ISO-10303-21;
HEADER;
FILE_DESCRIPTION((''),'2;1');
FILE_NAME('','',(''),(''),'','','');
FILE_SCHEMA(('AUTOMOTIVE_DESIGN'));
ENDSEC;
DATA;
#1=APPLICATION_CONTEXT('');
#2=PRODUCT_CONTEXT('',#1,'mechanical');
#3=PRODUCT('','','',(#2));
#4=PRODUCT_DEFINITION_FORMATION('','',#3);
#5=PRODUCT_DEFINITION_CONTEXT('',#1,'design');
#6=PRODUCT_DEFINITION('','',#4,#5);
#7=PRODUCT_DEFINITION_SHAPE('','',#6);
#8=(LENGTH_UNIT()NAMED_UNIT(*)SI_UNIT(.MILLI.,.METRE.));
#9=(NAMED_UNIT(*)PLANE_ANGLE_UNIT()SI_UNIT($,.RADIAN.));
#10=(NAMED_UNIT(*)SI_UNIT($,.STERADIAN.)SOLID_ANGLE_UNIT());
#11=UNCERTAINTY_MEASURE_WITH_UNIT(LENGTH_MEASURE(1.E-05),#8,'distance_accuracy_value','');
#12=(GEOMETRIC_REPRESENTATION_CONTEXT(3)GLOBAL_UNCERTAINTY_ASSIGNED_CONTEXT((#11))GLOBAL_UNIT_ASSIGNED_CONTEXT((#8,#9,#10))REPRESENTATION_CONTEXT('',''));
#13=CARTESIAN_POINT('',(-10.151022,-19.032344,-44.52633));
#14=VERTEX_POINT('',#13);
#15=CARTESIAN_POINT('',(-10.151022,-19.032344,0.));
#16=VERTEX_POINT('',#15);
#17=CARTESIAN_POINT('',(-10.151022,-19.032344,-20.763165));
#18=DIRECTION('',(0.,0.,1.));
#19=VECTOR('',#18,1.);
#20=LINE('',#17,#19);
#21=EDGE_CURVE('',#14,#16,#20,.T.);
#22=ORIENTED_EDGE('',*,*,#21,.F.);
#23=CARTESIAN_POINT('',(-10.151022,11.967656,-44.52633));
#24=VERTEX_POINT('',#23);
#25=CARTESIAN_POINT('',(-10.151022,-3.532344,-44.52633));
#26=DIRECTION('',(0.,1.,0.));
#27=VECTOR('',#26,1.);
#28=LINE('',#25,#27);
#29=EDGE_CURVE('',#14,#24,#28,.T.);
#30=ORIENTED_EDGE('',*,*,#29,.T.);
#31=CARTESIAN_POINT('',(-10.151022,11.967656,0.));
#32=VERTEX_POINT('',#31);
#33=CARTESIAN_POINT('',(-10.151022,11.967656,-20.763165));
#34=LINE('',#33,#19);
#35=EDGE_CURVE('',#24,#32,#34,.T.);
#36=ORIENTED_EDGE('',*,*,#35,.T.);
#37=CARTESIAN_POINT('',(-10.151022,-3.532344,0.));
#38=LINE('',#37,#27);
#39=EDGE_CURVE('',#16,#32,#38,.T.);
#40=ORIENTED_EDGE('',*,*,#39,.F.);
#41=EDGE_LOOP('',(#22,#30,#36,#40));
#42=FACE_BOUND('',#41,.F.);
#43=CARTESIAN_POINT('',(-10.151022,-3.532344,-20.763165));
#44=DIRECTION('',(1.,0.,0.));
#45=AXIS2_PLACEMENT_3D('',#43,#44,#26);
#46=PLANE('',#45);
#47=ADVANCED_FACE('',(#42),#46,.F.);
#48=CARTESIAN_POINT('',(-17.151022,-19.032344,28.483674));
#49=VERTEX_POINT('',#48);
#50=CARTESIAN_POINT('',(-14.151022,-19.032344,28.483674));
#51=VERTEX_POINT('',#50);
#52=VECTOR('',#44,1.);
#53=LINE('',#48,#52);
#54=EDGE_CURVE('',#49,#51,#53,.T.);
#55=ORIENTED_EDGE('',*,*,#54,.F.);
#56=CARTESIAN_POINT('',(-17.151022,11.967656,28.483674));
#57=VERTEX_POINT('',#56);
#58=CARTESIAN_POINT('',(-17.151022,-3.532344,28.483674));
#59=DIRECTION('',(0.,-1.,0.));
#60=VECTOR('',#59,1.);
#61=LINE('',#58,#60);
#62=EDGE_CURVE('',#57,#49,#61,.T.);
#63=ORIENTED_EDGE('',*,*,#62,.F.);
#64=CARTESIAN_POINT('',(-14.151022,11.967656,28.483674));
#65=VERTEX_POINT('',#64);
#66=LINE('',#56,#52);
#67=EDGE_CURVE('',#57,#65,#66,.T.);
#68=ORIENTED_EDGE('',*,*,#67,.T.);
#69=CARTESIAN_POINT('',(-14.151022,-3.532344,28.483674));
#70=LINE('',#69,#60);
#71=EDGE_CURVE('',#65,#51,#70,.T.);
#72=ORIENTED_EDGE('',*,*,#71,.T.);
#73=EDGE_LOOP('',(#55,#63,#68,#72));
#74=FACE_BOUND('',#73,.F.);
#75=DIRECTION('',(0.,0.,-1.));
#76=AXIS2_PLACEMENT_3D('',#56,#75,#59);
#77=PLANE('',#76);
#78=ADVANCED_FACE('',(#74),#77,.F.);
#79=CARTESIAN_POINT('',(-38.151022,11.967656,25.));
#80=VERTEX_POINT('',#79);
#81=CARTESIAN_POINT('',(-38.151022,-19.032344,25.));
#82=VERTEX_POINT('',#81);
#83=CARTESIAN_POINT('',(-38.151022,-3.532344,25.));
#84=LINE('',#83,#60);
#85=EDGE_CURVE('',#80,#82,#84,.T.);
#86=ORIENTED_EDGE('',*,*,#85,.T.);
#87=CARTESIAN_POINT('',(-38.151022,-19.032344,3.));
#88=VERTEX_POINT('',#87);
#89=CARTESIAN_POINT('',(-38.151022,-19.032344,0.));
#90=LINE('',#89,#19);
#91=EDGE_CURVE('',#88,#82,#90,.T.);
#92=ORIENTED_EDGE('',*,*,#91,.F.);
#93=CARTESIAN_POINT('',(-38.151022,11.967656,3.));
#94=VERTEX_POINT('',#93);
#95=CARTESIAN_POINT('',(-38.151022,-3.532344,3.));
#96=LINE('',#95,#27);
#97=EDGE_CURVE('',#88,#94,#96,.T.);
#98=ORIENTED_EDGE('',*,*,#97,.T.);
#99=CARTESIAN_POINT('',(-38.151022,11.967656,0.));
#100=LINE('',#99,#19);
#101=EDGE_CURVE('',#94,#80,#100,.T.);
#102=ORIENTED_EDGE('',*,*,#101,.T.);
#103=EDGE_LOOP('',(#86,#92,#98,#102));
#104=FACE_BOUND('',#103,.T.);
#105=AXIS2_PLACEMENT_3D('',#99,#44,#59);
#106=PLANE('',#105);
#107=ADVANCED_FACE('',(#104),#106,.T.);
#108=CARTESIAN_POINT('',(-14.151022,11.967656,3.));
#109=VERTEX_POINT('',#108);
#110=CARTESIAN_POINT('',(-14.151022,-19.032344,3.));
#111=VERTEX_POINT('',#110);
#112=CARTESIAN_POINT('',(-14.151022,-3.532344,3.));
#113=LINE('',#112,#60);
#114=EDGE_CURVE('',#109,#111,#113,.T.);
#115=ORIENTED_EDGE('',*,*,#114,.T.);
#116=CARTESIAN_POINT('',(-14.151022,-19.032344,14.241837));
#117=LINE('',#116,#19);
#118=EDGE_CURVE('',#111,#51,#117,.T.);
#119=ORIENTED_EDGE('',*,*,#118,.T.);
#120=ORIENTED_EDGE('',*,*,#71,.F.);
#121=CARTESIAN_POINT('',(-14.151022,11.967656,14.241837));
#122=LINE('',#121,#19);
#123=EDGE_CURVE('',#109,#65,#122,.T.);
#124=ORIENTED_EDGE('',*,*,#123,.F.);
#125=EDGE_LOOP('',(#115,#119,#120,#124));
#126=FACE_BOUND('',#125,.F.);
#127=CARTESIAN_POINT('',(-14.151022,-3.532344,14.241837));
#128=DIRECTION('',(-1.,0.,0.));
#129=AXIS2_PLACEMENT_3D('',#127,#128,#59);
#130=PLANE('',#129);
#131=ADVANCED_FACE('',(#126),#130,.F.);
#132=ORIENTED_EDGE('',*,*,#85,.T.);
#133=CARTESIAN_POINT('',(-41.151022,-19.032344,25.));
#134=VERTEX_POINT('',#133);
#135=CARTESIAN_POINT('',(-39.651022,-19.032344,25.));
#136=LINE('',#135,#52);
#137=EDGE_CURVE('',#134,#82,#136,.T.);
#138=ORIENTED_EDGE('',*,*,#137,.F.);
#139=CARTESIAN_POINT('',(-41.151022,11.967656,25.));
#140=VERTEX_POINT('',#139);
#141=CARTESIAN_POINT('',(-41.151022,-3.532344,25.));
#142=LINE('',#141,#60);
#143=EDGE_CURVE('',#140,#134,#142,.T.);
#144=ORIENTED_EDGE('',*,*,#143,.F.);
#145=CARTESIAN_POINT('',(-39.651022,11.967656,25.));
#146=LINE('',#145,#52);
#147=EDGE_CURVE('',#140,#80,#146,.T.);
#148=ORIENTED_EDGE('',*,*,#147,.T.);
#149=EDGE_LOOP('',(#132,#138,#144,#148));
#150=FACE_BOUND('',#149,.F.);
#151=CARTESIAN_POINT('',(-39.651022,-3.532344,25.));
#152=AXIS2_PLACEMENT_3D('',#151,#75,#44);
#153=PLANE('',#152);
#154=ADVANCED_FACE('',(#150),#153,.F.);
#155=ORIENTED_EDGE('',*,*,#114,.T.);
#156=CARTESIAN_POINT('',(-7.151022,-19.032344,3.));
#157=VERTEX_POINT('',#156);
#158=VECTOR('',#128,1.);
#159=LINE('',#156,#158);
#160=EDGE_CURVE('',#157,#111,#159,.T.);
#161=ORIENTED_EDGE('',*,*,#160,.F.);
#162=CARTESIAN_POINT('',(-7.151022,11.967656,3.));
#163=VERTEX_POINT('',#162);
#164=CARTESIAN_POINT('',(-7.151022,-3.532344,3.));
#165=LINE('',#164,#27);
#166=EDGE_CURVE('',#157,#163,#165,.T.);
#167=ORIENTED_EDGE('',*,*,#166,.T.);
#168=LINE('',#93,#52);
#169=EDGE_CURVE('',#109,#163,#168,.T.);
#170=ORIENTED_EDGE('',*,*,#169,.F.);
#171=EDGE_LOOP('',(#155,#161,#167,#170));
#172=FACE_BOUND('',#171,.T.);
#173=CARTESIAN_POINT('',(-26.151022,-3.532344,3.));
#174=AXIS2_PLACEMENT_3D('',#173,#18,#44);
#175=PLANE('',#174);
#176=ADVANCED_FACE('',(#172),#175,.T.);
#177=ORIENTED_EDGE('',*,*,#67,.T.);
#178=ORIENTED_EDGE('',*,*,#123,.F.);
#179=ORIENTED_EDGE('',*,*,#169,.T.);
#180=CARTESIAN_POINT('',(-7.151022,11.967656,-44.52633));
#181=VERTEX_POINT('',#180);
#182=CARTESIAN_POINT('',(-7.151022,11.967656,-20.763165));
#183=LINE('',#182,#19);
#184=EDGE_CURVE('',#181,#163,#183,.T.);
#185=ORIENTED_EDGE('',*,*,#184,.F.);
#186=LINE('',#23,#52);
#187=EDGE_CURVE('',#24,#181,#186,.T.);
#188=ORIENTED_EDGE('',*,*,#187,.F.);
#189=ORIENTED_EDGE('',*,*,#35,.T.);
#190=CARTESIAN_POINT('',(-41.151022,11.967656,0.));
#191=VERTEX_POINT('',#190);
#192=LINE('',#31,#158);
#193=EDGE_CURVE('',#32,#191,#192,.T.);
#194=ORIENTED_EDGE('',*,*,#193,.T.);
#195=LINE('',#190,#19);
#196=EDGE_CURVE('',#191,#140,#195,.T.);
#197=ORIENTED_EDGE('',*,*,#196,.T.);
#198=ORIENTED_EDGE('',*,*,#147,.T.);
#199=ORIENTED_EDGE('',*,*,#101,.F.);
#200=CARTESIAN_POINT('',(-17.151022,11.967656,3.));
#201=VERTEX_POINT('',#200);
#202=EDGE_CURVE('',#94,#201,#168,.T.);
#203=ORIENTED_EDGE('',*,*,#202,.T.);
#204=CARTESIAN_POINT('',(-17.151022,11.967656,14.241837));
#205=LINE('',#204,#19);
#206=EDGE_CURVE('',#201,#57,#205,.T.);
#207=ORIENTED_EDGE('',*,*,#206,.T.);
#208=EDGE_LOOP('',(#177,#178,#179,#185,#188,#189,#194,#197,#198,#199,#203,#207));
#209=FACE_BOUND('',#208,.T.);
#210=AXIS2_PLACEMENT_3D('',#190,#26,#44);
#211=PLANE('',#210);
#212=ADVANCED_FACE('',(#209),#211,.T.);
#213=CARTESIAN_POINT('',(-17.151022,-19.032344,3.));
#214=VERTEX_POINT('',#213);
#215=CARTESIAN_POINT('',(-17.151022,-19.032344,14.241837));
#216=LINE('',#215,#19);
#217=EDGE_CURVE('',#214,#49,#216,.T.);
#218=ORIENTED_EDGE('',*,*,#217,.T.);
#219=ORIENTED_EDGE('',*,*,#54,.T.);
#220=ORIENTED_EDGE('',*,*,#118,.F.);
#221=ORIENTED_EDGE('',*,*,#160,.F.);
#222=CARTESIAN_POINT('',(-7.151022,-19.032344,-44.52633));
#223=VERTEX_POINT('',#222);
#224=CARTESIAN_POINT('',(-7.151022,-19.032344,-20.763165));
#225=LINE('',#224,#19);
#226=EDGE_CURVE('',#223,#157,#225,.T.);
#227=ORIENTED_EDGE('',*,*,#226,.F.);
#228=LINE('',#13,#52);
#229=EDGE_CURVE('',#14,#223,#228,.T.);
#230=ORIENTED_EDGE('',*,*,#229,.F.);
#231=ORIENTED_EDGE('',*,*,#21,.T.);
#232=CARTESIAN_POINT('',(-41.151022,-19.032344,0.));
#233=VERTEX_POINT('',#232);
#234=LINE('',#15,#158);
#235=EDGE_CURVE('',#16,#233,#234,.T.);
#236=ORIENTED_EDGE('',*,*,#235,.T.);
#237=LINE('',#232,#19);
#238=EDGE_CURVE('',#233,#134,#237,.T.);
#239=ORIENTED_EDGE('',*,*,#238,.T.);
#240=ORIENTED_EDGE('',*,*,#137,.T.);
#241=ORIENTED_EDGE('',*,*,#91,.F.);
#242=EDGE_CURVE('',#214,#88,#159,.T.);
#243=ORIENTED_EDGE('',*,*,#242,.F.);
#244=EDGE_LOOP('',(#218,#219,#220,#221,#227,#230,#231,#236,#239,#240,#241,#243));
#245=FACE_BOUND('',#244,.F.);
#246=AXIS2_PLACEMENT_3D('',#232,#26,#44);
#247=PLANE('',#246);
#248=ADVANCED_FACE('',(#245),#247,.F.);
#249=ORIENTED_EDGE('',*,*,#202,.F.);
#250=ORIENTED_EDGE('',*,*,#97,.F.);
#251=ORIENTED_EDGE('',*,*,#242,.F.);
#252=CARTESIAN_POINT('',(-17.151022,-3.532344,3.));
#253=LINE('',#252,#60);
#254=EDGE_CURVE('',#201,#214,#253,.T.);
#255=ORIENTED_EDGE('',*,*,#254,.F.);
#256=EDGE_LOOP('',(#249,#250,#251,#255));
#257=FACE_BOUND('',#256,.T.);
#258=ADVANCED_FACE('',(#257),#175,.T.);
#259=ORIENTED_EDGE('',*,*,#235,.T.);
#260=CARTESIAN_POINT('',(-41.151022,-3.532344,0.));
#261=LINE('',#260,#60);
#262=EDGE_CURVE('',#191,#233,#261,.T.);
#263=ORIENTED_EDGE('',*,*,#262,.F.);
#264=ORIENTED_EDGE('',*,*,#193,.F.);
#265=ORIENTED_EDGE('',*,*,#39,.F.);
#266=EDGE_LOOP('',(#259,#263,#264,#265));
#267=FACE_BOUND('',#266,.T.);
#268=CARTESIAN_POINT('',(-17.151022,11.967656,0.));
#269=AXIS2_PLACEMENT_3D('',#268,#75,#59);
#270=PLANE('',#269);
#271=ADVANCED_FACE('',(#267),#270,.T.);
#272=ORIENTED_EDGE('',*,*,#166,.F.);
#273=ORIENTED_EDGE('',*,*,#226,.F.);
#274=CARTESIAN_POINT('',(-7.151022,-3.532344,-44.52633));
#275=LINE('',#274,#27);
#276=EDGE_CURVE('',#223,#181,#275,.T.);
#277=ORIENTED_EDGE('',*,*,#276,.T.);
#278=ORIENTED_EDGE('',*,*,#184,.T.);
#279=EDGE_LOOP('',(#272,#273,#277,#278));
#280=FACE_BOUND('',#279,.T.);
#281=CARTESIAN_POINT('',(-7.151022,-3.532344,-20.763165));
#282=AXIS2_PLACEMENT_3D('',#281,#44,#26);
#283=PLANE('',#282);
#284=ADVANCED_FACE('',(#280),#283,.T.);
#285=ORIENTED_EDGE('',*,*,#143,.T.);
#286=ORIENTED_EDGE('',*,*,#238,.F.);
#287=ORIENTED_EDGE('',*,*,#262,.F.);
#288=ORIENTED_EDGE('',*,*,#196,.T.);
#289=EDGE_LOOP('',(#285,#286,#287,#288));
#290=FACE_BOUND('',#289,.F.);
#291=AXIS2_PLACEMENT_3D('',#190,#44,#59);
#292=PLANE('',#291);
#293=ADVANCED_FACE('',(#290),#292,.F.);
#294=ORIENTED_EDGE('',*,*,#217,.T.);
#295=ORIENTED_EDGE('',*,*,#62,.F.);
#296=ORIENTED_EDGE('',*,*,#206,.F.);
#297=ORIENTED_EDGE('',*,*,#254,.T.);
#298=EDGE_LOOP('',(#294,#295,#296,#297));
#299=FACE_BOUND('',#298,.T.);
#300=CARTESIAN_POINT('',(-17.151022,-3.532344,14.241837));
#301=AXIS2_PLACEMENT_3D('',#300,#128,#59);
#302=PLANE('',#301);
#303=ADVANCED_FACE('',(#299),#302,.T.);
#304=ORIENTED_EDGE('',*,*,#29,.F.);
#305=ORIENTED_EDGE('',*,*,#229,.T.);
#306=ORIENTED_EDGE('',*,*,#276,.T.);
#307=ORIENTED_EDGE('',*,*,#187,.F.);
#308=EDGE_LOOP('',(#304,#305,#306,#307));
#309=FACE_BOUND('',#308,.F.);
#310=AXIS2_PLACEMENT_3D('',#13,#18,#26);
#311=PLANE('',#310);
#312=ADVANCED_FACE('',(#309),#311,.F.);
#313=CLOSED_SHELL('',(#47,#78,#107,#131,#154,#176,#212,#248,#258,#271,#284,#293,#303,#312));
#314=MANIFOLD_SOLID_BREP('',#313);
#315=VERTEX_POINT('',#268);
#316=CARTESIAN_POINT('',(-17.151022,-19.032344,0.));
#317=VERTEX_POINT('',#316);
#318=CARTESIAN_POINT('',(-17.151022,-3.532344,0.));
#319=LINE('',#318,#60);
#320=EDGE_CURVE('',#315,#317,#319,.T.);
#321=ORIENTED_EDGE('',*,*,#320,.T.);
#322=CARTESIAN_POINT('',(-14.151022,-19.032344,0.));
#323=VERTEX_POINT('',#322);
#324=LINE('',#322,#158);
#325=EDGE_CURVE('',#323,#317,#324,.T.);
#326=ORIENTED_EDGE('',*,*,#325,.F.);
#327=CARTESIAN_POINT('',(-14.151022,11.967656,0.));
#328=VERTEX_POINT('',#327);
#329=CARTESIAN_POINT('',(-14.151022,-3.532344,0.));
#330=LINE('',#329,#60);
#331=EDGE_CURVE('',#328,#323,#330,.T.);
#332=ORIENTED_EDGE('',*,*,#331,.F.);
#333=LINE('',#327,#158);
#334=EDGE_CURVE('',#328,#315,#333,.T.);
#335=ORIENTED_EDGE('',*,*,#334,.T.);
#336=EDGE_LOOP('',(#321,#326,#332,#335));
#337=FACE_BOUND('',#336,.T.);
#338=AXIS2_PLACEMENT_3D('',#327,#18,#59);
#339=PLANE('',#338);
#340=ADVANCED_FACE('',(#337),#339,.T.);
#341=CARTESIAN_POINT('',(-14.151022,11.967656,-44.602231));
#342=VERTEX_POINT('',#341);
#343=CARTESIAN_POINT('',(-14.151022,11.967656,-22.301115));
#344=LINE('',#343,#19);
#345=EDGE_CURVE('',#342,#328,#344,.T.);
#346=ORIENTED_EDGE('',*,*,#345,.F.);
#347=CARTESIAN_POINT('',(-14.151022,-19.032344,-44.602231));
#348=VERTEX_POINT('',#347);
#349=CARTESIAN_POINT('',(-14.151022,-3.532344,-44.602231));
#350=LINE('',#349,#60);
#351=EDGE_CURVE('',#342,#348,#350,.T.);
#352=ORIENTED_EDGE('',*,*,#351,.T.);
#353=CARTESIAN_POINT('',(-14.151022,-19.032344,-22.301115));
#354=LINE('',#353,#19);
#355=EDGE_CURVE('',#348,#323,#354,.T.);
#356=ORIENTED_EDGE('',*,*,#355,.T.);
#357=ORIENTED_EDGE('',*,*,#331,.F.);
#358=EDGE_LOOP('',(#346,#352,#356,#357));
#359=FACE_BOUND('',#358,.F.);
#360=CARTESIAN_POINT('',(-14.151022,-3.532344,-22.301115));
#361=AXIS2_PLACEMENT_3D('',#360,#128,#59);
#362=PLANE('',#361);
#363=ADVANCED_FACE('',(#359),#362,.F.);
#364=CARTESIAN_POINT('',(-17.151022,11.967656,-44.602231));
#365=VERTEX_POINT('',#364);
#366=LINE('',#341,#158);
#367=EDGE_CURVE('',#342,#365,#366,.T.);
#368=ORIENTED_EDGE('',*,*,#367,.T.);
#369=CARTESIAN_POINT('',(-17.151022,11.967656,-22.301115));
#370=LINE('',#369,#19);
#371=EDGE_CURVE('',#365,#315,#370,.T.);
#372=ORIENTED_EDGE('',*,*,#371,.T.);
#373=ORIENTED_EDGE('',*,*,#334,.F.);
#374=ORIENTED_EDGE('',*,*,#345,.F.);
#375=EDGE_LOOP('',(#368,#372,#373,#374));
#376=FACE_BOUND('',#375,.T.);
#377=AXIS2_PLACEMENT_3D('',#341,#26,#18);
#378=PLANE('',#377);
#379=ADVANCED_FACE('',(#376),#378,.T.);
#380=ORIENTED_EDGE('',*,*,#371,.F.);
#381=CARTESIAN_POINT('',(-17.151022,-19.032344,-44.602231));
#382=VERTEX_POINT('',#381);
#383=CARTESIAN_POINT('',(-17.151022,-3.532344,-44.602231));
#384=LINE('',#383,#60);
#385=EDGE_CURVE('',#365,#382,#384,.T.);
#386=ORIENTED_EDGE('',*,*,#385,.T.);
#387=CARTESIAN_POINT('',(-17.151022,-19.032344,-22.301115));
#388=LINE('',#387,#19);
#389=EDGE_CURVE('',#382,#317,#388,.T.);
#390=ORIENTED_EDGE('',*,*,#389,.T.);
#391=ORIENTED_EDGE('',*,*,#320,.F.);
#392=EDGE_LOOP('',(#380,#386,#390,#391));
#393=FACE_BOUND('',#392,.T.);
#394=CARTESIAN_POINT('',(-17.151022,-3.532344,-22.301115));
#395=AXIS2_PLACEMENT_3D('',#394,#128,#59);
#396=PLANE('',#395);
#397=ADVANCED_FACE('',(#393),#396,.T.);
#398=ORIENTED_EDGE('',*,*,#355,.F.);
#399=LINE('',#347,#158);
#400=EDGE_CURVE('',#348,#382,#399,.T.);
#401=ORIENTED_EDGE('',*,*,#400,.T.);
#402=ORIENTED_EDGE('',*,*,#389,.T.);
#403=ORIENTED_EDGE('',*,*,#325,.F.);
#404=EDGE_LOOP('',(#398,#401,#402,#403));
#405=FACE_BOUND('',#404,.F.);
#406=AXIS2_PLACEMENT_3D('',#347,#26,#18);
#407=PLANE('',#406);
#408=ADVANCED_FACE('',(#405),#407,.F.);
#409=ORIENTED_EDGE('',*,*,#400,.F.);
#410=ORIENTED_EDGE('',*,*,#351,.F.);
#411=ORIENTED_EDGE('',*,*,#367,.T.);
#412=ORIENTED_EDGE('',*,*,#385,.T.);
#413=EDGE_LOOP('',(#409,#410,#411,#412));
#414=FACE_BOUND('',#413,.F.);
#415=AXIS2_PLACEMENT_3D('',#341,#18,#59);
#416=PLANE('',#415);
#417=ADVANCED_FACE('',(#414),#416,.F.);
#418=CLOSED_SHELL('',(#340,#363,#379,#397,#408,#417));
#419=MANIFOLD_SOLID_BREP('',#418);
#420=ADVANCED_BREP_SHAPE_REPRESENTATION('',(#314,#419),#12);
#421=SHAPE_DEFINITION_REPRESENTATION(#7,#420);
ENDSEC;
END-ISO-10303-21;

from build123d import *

# Parameters (mm, degrees)
F0_W      = 4
F0_H      = 31
F1_DEPTH  = 3
F2_W      = 31
F2_H      = 47.5263299036
F3_DEPTH  = 3
F4_W      = 31
F4_H      = 44.6022309436
F5_DEPTH  = 3
F6_W      = 24
F6_H      = 31
F7_DEPTH  = 3
F8_W      = 3
F8_H      = 31
F9_DEPTH  = 25
F10_W     = 31
F10_H     = 28.4836739302
F11_DEPTH = 3


with BuildPart() as f1:
    # F0 (on Top) → F1 (new body)
    with BuildSketch(Plane.XY):
        with Locations((-12.1510221595, -3.5323435441)):
            Rectangle(F0_W, F0_H)
    extrude(amount=F1_DEPTH)

    # F2 (on face) → F3 (join)
    with BuildSketch(Plane.YZ.offset(-10.1510221595)):
        with Locations((-3.5323435441, -20.7631649518)):
            Rectangle(F2_W, F2_H)
    extrude(amount=F3_DEPTH)

    # F6 (on face) → F7 (join)
    with BuildSketch(Plane.XY.offset(3)):
        with Locations((-26.1510221595, -3.5323435441)):
            Rectangle(F6_W, F6_H)
    extrude(amount=-F7_DEPTH)

    # F8 (on face) → F9 (join)
    with BuildSketch(Plane(origin=(0, 0, 0), x_dir=(1, 0, 0), z_dir=(0, 0, -1))):
        with Locations((-39.6510221595, 3.5323435441)):
            Rectangle(F8_W, F8_H)
    extrude(amount=-F9_DEPTH)

    # F10 (on face) → F11 (join)
    with BuildSketch(Plane(origin=(-17.1510221595, 0, 0), x_dir=(0, -1, 0), z_dir=(-1, 0, 0))):
        with Locations((3.5323435441, 14.2418369651)):
            Rectangle(F10_W, F10_H)
    extrude(amount=-F11_DEPTH)


with BuildPart() as f5:
    # F4 (on face) → F5 (new body)
    with BuildSketch(Plane(origin=(-14.1510221595, 0, 0), x_dir=(0, -1, 0), z_dir=(-1, 0, 0))):
        with Locations((3.5323435441, -22.3011154718)):
            Rectangle(F4_W, F4_H)
    extrude(amount=F5_DEPTH)


solid = Compound([f1.part, f5.part])
